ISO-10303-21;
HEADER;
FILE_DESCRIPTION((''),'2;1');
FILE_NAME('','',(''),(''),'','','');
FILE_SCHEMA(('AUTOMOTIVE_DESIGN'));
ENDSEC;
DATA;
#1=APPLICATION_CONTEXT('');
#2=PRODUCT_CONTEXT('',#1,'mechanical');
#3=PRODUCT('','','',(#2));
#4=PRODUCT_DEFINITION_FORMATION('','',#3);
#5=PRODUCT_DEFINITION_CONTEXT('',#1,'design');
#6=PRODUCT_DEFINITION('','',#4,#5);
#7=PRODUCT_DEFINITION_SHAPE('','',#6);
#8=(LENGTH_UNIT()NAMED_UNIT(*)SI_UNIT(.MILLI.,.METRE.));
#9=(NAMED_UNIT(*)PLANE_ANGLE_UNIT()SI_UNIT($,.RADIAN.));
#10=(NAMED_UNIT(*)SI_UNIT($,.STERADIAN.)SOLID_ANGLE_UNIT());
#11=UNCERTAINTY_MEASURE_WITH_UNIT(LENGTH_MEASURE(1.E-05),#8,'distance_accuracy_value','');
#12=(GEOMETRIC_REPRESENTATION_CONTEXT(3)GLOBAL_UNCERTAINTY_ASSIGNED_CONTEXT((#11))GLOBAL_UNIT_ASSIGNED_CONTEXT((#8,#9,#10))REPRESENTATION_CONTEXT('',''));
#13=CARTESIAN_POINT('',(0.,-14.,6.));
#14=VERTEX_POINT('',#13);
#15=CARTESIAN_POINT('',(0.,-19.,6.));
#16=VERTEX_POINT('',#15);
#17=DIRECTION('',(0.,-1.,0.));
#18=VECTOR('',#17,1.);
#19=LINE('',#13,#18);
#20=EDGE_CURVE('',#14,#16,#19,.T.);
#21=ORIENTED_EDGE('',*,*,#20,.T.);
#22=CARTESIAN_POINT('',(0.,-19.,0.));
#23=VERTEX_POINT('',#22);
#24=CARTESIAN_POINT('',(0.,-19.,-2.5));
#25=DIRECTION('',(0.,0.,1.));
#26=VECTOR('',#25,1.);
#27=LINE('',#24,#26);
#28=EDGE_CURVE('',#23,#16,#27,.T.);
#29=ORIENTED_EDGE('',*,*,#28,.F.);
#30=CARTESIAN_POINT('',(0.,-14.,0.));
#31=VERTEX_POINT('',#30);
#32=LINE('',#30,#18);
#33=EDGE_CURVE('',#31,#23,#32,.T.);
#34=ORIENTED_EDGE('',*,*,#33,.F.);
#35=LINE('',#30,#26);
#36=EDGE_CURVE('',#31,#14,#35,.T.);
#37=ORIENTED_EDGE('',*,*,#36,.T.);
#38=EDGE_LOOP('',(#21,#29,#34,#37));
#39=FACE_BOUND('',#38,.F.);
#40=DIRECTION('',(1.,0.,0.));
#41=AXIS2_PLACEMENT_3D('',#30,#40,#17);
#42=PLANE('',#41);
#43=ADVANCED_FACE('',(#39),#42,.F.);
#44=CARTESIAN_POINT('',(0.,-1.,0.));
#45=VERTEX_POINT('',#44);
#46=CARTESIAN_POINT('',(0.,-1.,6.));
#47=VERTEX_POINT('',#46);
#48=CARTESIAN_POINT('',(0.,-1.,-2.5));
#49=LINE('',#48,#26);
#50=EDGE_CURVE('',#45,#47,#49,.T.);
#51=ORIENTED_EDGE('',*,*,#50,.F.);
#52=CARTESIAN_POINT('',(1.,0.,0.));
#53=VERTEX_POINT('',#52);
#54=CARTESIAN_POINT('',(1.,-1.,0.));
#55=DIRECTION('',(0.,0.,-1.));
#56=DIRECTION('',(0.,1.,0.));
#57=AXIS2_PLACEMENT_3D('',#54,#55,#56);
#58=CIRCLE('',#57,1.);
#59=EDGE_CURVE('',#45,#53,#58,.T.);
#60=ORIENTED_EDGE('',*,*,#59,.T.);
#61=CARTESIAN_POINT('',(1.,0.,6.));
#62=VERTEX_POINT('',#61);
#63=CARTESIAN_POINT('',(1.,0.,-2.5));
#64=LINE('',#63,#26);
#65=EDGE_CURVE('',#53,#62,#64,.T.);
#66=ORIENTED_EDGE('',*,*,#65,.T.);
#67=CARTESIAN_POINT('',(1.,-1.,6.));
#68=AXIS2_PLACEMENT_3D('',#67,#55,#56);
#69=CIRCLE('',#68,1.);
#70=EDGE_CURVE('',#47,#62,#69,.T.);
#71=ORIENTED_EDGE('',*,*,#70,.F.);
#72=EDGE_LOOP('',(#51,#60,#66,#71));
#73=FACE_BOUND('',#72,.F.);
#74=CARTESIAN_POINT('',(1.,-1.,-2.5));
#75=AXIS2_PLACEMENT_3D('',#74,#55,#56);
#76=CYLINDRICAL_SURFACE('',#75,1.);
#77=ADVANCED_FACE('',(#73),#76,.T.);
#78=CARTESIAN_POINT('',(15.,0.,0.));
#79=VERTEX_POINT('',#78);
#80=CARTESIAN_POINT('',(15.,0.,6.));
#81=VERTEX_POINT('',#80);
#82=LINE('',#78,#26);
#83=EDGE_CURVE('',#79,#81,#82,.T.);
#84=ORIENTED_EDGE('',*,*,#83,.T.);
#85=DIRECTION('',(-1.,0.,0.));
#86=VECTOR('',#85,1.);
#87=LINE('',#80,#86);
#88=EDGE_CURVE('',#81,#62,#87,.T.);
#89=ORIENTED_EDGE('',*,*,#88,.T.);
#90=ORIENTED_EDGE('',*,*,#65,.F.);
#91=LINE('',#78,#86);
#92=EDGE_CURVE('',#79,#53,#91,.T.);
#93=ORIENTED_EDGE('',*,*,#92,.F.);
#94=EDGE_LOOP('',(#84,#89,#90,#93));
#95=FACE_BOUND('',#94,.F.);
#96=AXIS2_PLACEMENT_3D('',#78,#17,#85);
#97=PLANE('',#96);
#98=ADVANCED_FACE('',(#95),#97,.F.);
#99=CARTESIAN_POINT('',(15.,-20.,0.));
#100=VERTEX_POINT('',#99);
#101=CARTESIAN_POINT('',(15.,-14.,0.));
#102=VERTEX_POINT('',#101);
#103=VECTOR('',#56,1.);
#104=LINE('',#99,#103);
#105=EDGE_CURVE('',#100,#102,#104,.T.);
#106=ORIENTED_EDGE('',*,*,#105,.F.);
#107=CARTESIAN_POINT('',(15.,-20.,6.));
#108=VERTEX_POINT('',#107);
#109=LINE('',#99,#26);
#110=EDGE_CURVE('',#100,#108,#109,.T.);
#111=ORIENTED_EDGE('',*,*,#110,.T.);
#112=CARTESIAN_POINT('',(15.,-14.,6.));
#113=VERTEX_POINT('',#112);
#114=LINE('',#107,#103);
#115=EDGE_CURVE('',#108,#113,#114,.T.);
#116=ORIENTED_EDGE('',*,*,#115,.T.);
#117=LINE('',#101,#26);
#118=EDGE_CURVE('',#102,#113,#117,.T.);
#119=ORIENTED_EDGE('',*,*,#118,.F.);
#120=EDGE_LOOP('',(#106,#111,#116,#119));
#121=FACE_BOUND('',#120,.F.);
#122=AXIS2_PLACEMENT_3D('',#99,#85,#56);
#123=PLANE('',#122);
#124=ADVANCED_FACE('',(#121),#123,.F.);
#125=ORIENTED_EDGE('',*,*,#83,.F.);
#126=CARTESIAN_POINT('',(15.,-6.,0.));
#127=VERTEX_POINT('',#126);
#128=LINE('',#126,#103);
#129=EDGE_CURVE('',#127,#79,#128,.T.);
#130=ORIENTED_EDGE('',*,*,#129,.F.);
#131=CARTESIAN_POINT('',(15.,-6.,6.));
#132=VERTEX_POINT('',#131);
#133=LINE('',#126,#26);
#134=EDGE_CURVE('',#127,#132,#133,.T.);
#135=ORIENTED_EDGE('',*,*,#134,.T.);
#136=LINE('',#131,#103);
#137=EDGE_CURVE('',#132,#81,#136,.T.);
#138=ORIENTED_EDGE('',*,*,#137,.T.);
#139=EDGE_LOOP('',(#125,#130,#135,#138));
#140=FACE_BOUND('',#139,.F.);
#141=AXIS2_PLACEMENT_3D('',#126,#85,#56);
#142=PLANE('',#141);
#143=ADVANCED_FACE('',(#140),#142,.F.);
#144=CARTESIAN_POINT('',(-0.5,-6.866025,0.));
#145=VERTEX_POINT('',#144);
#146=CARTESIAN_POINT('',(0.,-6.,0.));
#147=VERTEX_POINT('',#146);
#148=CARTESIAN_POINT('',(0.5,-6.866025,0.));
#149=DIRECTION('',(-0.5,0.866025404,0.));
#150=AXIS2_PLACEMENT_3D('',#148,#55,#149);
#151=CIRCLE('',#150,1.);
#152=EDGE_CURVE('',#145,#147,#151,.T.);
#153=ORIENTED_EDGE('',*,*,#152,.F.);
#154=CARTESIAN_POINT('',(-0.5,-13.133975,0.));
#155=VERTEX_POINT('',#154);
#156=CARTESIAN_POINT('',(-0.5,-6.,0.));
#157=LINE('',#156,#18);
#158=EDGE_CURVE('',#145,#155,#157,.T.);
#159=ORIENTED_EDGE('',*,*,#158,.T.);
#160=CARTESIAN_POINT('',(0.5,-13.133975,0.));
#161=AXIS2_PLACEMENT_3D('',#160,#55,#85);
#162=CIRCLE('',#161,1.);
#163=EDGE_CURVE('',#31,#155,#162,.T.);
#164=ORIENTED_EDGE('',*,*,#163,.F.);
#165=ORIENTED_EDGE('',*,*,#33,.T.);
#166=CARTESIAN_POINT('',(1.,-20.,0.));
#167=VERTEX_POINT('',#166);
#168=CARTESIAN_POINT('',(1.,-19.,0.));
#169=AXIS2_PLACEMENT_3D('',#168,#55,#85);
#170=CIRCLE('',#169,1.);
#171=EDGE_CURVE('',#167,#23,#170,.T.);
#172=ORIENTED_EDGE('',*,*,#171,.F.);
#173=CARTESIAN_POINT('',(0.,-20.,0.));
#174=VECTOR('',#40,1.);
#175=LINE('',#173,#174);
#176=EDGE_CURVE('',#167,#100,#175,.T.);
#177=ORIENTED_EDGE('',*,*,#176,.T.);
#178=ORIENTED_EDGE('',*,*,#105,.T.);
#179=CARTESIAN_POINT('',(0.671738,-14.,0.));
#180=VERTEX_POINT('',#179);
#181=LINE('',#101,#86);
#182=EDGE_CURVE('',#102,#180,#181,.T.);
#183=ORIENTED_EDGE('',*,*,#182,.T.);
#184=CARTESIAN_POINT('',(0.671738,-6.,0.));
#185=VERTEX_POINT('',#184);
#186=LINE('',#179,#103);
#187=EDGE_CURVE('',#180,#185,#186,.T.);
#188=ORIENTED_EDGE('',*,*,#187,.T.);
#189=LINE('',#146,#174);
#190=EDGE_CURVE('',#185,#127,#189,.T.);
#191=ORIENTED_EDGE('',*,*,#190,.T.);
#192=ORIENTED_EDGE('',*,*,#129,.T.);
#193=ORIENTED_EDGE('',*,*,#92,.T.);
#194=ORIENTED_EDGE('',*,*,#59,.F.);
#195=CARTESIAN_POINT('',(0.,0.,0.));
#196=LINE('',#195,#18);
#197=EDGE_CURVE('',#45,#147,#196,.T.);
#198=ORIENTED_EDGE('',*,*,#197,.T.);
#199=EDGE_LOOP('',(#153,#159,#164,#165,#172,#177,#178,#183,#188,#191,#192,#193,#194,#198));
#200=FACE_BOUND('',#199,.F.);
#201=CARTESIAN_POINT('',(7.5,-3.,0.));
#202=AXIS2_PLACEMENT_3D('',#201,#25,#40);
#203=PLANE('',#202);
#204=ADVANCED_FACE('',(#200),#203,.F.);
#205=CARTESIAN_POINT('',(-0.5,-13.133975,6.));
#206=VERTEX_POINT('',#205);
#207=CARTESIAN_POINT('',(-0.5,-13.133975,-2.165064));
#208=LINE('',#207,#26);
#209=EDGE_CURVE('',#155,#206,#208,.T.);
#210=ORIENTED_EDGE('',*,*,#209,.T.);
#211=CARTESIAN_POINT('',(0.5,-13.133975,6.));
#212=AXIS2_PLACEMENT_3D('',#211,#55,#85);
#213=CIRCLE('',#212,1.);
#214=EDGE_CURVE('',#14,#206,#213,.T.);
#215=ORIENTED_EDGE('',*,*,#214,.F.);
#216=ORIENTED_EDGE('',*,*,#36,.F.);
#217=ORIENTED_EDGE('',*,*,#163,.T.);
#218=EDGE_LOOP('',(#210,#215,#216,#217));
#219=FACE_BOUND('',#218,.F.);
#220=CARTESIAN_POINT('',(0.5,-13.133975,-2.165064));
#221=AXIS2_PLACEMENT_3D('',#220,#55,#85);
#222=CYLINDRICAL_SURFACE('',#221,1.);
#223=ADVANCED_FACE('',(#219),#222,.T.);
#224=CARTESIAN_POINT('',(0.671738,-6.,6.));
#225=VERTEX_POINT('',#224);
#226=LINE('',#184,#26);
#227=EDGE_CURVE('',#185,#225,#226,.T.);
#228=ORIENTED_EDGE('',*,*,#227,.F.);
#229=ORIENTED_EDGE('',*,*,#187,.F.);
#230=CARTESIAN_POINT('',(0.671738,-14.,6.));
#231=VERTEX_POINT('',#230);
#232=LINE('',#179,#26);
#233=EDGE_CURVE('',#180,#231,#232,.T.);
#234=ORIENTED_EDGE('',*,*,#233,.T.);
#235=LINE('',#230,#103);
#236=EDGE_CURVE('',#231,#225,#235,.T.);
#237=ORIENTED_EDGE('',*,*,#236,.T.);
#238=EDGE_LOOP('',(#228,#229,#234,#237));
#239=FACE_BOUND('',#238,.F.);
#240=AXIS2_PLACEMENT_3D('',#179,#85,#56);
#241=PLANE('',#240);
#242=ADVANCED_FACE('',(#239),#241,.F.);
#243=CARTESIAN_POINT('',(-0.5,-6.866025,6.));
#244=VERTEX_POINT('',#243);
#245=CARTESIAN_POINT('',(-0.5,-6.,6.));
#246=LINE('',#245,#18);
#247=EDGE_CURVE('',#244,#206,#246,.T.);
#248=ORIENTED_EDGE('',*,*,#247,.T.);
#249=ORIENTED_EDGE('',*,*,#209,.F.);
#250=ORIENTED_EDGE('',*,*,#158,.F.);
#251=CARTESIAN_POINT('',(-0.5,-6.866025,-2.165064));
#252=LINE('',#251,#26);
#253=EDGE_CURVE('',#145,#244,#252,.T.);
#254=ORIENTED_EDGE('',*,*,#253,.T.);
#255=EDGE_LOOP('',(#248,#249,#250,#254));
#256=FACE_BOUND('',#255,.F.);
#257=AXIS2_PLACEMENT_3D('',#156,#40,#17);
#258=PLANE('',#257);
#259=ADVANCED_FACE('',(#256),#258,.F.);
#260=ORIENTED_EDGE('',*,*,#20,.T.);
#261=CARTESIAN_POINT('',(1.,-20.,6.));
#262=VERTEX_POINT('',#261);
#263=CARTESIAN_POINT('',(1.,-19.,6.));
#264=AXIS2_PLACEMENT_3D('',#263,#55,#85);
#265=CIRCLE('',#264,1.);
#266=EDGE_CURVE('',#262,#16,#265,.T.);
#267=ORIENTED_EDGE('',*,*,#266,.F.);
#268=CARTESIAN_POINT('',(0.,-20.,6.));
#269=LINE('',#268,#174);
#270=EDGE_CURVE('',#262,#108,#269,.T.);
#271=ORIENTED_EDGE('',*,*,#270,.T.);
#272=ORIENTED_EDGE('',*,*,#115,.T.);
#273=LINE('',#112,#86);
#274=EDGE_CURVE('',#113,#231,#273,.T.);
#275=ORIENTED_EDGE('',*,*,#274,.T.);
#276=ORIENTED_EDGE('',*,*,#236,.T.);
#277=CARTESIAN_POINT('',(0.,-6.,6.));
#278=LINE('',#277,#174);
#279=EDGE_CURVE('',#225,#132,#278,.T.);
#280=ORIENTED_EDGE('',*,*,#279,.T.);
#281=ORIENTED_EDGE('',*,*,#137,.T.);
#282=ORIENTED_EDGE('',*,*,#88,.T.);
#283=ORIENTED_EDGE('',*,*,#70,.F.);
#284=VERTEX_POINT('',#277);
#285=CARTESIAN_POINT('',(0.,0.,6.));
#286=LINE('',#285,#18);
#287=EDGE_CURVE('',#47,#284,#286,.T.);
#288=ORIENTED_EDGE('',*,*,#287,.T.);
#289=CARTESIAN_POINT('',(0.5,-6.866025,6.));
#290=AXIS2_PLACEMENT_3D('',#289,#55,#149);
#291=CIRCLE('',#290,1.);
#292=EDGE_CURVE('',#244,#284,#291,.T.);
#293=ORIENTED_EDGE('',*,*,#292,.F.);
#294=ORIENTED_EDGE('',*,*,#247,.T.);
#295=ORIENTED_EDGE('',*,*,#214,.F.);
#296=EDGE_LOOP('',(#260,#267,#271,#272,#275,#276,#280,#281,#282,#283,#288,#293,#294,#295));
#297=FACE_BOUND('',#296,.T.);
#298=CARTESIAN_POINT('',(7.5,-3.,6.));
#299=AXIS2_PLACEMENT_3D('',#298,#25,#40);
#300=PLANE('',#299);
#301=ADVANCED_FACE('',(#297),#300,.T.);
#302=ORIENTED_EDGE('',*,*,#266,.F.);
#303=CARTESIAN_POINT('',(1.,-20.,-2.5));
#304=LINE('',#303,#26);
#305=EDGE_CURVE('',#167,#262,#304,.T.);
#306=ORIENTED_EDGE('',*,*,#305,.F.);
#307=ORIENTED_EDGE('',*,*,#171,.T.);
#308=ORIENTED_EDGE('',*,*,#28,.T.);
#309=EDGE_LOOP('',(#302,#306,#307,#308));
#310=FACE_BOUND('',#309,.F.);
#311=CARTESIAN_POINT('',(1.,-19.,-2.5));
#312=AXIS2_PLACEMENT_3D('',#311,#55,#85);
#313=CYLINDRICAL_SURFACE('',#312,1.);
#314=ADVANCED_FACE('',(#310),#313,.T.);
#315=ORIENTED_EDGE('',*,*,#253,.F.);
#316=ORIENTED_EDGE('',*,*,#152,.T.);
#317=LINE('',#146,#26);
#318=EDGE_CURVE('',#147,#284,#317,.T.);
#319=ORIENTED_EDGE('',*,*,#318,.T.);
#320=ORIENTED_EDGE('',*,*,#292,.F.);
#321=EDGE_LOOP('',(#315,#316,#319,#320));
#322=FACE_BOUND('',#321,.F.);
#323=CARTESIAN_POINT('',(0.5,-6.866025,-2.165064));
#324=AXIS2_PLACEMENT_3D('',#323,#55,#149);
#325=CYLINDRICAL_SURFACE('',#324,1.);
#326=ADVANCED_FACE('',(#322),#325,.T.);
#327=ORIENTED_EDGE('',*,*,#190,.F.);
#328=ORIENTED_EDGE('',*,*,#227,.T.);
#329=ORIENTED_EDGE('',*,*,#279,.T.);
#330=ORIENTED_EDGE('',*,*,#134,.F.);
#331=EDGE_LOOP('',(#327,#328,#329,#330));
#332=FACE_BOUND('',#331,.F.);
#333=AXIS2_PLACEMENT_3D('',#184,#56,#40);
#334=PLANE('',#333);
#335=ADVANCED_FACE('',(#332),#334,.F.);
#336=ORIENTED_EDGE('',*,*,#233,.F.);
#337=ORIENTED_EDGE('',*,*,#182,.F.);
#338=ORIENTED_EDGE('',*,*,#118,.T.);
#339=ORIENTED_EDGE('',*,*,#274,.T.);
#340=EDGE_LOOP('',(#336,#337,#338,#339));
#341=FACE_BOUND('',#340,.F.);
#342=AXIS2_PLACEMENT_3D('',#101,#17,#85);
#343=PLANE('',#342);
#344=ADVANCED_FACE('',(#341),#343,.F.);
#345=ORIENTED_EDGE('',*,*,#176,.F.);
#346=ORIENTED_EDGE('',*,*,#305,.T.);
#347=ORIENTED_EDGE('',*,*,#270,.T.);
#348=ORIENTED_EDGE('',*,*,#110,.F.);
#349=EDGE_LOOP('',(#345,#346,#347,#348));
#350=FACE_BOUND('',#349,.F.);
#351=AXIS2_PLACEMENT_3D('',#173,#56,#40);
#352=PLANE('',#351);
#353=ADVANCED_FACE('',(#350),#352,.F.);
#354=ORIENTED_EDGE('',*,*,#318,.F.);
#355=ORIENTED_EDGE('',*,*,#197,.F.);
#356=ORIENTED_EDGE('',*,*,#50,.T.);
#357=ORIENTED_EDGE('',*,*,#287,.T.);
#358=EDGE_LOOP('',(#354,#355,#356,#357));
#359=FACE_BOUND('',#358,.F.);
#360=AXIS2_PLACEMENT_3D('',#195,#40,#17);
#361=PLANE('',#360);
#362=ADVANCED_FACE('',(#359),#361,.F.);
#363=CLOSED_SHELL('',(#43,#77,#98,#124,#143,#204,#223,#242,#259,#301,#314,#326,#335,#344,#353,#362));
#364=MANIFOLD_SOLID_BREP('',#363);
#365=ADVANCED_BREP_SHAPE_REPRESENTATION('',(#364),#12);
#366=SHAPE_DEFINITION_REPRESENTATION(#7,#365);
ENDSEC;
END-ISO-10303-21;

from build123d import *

# Parameters (mm, degrees)
F1_DEPTH    = 6
F2_T1_DEPTH = 10.3301270189
F2_T3_DEPTH = 11


# Not quite as in the source:
# - a fillet or chamfer that OpenCascade refuses, or shapes differently, is made with other operations: its cross-section is extruded or revolved along the edge and cut away or added


with BuildPart() as f1:
    # F0 (on Top) → F1 (new body)
    with BuildSketch(Plane.XY):
        Polygon((15, 0), (0, 0), (0, -4), (0, -6), (0.6717378856, -6), (15, -6), align=None)
        Polygon((0.6717378856, -6), (0, -6), (-0.5, -6), (-0.5, -14), (0, -14), (0.6717378856, -14), align=None)
        Polygon((15, -14), (0.6717378856, -14), (0, -14), (0, -16), (0, -20), (15, -20), align=None)
    extrude(amount=F1_DEPTH)

    # F2: fillet of radius 1 on 4 edges, made by hand

    # F2_s2 → F2_t1 (cut)
    with BuildSketch(Plane.XY.offset(-2.1650635095)):
        with BuildLine():
            ThreePointArc((0, -6), (-0.3660254038, -6.3660254038), (-0.5, -6.8660254038))
            Line((-0.5, -6.8660254038), (-0.5, -6))
            Line((-0.5, -6), (0, -6))
        make_face()
        with BuildLine():
            ThreePointArc((-0.5, -13.1339745962), (-0.3660254038, -13.6339745962), (0, -14))
            Line((0, -14), (-0.5, -14))
            Line((-0.5, -14), (-0.5, -13.1339745962))
        make_face()
    extrude(amount=F2_T1_DEPTH, mode=Mode.SUBTRACT)

    # F2_s4 → F2_t3 (cut)
    with BuildSketch(Plane.XY.offset(-2.5)):
        with BuildLine():
            ThreePointArc((1, 0), (0.2928932188, -0.2928932188), (0, -1))
            Line((0, -1), (0, 0))
            Line((0, 0), (1, 0))
        make_face()
        with BuildLine():
            ThreePointArc((0, -19), (0.2928932188, -19.7071067812), (1, -20))
            Line((1, -20), (0, -20))
            Line((0, -20), (0, -19))
        make_face()
    extrude(amount=F2_T3_DEPTH, mode=Mode.SUBTRACT)


solid = f1.part
